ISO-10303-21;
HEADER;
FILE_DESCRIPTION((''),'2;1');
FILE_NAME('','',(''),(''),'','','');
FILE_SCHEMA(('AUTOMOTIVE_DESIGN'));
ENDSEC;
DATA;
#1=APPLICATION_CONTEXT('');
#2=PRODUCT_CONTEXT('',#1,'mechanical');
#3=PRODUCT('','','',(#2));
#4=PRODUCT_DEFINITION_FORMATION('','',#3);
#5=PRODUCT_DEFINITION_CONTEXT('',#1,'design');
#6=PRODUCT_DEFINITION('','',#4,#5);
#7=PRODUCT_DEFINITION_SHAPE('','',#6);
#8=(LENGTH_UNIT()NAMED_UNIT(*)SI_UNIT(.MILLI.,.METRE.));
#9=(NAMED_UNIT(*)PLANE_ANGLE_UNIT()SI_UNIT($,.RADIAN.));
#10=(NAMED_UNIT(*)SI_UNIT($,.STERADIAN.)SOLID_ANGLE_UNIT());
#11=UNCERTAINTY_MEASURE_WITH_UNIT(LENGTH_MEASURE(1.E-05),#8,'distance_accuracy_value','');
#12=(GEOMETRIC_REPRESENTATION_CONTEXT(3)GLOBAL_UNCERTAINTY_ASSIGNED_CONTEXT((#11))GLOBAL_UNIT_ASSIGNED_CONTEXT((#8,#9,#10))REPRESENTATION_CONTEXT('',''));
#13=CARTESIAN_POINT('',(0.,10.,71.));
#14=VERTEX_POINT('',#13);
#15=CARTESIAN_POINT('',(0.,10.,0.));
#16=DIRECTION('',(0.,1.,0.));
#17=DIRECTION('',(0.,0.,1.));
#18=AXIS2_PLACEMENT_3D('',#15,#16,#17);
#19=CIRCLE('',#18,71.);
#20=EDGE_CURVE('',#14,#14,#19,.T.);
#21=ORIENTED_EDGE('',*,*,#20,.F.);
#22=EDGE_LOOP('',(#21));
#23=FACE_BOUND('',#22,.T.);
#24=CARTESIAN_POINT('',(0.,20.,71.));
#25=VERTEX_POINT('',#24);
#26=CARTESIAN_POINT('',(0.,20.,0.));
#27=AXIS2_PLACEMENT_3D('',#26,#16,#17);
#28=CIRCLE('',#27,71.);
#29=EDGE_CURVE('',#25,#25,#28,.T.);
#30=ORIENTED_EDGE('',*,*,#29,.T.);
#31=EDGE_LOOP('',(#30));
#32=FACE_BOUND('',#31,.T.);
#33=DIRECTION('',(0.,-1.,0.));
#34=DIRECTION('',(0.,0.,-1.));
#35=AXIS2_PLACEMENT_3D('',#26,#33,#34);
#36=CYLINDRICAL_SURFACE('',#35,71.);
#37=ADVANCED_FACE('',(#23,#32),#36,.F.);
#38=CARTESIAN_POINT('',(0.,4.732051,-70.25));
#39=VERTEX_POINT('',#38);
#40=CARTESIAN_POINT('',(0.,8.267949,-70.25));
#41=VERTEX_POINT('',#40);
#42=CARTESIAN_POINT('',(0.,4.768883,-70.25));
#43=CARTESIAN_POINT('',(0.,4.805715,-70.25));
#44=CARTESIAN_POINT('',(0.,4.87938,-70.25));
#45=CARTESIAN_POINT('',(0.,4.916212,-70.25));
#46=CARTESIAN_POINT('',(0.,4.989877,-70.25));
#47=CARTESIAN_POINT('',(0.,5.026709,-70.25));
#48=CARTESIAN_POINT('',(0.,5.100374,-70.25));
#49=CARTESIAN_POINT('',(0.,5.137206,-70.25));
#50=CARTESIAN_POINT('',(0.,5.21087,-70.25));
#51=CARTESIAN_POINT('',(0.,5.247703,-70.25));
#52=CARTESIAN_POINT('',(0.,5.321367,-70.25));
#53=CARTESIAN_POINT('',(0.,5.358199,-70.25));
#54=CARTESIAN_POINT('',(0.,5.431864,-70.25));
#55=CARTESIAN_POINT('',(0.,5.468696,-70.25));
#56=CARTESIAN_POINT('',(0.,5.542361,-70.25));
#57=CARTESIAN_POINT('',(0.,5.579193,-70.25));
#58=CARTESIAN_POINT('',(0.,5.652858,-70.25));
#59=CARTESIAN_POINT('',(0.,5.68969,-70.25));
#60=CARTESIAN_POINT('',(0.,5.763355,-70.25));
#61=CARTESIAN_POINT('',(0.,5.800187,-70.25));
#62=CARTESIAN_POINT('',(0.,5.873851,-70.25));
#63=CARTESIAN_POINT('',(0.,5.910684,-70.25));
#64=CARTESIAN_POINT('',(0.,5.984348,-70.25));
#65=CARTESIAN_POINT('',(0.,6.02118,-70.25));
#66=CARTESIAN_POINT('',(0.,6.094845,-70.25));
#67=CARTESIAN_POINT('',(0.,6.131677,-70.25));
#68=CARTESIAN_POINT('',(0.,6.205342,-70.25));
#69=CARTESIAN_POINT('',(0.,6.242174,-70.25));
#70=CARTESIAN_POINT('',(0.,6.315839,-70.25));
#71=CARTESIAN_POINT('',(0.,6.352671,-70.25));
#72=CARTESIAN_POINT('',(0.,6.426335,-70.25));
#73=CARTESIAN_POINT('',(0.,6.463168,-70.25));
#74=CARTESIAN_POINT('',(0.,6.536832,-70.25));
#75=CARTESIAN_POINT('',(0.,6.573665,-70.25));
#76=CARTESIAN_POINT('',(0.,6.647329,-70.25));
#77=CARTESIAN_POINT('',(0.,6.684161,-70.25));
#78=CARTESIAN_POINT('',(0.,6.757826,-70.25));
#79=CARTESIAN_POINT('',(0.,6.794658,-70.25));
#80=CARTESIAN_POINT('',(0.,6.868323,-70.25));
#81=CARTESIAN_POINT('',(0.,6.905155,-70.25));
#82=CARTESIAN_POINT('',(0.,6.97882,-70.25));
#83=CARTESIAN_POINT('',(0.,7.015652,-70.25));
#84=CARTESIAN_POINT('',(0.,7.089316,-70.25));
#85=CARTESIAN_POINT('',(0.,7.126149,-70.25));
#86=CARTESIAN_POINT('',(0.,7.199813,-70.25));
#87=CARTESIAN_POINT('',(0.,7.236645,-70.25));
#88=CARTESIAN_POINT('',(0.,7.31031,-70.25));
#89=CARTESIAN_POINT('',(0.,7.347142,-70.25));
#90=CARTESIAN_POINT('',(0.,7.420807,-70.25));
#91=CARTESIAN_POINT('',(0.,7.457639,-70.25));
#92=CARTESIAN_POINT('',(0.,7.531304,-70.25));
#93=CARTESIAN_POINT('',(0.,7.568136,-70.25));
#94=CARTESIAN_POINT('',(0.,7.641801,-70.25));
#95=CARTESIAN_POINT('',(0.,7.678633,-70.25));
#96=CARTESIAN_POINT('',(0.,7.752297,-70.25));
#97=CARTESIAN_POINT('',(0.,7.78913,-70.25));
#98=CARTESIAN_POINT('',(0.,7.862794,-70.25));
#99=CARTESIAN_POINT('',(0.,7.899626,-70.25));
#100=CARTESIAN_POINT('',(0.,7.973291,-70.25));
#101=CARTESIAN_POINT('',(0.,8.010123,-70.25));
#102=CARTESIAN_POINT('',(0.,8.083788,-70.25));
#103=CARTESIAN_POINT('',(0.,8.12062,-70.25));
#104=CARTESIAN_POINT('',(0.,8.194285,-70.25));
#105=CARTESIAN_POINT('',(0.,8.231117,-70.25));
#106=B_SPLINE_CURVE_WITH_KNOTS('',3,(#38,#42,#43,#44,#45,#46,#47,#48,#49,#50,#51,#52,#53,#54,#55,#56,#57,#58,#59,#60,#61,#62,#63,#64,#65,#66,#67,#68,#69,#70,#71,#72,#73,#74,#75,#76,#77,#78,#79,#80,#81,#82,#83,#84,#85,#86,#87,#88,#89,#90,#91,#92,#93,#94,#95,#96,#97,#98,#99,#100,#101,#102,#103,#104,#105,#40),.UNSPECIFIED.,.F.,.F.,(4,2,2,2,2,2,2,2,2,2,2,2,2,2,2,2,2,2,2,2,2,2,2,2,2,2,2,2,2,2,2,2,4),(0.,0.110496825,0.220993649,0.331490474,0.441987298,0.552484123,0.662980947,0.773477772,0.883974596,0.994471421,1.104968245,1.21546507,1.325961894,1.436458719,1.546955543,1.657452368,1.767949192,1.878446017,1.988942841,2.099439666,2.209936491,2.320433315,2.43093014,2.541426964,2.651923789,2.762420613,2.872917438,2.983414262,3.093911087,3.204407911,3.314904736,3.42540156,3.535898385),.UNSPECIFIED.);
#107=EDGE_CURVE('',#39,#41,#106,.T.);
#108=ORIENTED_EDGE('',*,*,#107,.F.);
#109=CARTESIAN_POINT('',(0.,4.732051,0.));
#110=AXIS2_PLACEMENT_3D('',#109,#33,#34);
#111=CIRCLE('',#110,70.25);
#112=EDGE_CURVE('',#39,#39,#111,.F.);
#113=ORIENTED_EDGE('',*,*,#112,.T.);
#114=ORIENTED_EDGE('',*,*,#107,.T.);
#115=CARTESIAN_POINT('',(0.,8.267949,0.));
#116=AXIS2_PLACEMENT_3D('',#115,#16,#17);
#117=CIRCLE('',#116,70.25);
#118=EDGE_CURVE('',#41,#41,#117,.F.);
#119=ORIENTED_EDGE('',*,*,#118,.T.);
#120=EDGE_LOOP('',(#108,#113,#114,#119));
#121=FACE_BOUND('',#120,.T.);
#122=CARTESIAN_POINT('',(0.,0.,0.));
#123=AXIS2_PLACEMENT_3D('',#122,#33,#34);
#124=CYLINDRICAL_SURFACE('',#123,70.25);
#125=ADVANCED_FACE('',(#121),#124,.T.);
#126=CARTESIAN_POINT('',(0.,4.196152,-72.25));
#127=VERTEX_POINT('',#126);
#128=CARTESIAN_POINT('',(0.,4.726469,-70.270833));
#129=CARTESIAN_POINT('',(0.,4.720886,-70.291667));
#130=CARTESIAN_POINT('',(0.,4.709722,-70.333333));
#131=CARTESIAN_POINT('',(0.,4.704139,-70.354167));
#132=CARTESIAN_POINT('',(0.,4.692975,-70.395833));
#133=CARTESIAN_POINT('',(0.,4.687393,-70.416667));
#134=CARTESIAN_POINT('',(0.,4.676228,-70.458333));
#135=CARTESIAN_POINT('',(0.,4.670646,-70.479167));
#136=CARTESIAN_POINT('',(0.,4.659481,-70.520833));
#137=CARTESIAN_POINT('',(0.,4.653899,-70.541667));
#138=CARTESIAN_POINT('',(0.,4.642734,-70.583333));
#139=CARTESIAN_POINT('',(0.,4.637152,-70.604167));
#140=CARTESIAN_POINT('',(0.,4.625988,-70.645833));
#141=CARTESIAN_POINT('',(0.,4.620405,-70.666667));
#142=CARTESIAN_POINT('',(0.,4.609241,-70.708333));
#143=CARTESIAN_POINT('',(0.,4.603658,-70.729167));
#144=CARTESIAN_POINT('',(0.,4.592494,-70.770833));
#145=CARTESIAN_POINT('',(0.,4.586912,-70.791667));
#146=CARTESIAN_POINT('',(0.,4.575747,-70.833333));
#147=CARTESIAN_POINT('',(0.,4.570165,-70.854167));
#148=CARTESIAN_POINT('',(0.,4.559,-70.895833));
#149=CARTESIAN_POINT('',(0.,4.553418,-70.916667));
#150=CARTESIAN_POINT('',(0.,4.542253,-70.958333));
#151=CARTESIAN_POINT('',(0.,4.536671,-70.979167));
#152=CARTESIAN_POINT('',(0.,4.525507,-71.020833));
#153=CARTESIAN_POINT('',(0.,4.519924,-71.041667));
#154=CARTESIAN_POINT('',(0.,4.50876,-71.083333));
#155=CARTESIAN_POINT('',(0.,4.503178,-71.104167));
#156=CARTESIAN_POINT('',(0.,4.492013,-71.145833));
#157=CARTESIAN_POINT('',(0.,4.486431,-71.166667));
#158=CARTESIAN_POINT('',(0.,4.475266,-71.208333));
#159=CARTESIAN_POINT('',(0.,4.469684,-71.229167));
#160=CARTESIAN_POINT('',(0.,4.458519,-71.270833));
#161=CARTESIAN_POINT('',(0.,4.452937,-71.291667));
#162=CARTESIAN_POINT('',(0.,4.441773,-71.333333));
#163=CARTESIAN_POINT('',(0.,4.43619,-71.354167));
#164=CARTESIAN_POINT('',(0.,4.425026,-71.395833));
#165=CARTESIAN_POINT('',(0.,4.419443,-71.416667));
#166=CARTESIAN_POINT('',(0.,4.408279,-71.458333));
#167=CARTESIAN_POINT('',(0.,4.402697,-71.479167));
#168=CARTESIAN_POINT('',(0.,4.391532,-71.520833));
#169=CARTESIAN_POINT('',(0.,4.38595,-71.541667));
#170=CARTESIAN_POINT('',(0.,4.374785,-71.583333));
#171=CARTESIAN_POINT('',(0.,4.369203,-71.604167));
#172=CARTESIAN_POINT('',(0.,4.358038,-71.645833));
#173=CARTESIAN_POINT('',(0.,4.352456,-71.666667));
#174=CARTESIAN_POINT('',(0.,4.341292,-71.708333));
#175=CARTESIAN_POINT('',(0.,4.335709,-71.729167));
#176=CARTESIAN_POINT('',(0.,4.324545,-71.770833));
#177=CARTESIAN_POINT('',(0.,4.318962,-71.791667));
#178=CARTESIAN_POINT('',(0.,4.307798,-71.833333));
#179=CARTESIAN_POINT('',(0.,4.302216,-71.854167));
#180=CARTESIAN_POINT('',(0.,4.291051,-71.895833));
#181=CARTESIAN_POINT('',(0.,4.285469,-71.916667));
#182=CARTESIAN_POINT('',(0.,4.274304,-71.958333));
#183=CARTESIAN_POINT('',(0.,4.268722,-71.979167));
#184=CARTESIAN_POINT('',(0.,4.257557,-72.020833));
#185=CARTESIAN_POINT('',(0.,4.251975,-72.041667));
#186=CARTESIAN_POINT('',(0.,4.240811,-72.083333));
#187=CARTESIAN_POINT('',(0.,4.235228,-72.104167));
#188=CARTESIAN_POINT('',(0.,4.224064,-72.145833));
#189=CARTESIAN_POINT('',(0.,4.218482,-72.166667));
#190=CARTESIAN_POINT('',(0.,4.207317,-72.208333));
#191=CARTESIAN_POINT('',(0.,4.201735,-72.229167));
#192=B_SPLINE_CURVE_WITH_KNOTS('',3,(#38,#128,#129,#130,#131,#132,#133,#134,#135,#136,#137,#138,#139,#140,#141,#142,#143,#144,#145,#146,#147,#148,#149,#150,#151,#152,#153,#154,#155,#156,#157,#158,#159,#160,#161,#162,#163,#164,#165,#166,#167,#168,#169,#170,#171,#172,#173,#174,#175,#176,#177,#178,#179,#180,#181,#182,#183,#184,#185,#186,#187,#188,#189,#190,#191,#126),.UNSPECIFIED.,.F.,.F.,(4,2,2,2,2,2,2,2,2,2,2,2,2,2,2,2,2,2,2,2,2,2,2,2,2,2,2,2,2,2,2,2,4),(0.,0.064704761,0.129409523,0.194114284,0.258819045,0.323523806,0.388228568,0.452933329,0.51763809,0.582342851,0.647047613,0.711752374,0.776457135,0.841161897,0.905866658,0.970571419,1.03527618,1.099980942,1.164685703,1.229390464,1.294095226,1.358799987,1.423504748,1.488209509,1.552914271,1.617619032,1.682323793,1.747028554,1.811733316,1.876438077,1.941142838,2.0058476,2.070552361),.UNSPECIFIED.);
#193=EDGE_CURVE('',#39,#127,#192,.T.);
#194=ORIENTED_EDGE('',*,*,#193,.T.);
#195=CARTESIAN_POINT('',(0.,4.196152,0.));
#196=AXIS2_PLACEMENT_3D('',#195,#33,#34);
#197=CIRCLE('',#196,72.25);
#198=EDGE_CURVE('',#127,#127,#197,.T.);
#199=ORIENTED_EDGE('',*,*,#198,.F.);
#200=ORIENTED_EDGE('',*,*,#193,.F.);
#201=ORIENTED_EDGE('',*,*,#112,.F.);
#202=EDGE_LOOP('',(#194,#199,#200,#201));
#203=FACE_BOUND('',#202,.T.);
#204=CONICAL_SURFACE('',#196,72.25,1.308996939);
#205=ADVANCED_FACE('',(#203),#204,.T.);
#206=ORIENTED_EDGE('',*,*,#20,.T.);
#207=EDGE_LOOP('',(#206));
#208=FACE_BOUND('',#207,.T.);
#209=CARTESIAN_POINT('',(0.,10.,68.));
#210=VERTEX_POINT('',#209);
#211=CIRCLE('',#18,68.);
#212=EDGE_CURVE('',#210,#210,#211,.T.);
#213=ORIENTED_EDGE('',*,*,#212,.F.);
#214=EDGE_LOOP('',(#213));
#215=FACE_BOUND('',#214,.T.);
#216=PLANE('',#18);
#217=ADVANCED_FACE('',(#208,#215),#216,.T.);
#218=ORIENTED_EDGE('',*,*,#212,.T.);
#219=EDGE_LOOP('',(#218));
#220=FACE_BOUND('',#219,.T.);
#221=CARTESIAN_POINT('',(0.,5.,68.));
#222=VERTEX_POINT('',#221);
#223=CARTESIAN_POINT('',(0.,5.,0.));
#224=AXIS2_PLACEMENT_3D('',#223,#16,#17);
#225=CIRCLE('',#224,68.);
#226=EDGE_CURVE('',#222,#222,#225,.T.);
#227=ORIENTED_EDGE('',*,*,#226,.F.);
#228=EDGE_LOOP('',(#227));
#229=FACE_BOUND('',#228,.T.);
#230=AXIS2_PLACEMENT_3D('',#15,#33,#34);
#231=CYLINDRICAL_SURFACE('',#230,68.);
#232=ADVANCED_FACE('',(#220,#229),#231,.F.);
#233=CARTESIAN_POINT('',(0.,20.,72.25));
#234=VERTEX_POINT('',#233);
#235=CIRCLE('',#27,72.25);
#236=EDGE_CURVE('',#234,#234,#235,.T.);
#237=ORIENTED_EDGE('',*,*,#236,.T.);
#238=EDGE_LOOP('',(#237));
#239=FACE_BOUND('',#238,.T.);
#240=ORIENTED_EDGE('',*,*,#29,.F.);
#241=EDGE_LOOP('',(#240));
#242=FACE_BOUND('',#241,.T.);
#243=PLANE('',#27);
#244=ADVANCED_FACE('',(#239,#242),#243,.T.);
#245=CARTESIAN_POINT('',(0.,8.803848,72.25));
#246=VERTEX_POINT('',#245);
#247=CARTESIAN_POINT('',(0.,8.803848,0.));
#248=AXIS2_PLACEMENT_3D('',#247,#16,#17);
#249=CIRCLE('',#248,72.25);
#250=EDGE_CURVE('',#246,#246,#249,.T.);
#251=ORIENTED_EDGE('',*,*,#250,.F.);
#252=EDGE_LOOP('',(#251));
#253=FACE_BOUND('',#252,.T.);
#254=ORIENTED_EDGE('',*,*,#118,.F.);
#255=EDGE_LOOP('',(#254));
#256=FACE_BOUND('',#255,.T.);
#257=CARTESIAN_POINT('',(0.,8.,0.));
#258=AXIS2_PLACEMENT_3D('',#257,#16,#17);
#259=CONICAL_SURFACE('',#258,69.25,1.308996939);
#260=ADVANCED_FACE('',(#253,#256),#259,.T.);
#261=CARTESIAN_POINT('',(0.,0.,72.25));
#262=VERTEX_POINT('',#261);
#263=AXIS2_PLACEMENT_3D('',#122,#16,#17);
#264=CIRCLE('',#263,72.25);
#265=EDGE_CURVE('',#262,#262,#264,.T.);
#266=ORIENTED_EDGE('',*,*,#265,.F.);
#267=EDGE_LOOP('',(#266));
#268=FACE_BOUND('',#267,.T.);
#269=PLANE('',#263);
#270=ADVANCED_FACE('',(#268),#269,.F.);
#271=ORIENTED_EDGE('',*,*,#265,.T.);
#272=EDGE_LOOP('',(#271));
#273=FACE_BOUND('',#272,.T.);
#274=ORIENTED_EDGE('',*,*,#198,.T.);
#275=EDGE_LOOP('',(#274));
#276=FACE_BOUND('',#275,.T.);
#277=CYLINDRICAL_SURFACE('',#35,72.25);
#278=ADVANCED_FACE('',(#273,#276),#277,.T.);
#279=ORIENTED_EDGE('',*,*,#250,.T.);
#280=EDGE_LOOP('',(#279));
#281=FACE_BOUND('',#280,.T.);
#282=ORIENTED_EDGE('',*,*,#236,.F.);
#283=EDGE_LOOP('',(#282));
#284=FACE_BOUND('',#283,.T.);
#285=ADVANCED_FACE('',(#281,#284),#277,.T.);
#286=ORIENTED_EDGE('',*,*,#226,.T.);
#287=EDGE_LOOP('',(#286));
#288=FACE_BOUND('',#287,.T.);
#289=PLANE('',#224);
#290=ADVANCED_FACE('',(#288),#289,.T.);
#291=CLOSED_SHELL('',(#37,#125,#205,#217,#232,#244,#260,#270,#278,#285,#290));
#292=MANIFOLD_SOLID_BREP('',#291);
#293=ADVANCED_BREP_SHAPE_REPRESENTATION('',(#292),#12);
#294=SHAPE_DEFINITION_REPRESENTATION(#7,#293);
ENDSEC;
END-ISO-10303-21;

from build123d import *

# Parameters (mm, degrees)
SKETCH_1_R       = 72.25
SKETCH_1_R_2     = 71
EXTRUDE_1_DEPTH  = 20
SKETCH_1_6_R     = 71
SKETCH_1_6_R_2   = 68
EXTRUDE_3_DEPTH  = 10
SKETCH_2_W       = 2
SKETCH_2_H       = 3
CHAMFER_1_SIZE   = 3
CHAMFER_1_SIZE_2 = 0.803847577
CHAMFER_2_SIZE   = 0.803847577
CHAMFER_2_SIZE_2 = 3
SKETCH_1_8_R     = 68
SKETCH_1_8_R_2   = 62.25
EXTRUDE_5_DEPTH  = 5


with BuildPart() as part:
    # 草圖1 → 填料-伸長1 (new body)
    with BuildSketch(Plane(origin=(0, 0, 0), x_dir=(1, 0, 0), z_dir=(0, 1, 0))):
        with Locations(Location((0, 0, 0), (0, 0, 270))):
            Circle(SKETCH_1_R)
        with Locations(Location((0, 0, 0), (0, 0, 270))):
            Circle(SKETCH_1_R_2, mode=Mode.SUBTRACT)
    extrude(amount=EXTRUDE_1_DEPTH)

    # 草圖1<6> → 填料-伸長3 (add)
    with BuildSketch(Plane(origin=(0, 0, 0), x_dir=(1, 0, 0), z_dir=(0, 1, 0))):
        with Locations(Location((0, 0, 0), (0, 0, 270))):
            Circle(SKETCH_1_6_R)
        with Locations(Location((0, 0, 0), (0, 0, 270))):
            Circle(SKETCH_1_6_R_2, mode=Mode.SUBTRACT)
    extrude(amount=EXTRUDE_3_DEPTH)

    # 草圖2 → 除料-旋轉1 (revolve, cut)
    with BuildSketch(Plane.XY, mode=Mode.PRIVATE) as cut_revolve_1_sk:
        with Locations((71.25, 6.5)):
            Rectangle(SKETCH_2_W, SKETCH_2_H)
    revolve(cut_revolve_1_sk.sketch.rotate(Axis((0, 0, 0), (0, 1, 0)), 90), axis=Axis((0, 0, 0), (0, 1, 0)), mode=Mode.SUBTRACT)

    # 導角1
    # the kernel refuses this chamfer: 3, 0.803847577 mm, written as the material it takes off along each edge
    with BuildSketch(Plane(origin=(0, 8, 0), x_dir=(0, 0, 1), z_dir=(1, 0, 0))) as chamfer_1_piece_1_section:
        Polygon((72.25 - CHAMFER_1_SIZE, 0), (72.25, -CHAMFER_1_SIZE_2), (72.25, 0), align=None)
    chamfer_1_piece_1 = revolve(axis=Axis((0, 8, 0), (0, -1, 0)), mode=Mode.PRIVATE)
    chamfer_1_piece_1 = chamfer_1_piece_1 - Plane(origin=(0, 8.471650201, 0), x_dir=(0, 0, -1), z_dir=(0, 1, 0)) * Cylinder(70.25, 289, mode=Mode.PRIVATE)
    add(chamfer_1_piece_1, mode=Mode.SUBTRACT)

    # 導角2
    # the kernel refuses this chamfer: 3, 0.803847577 mm, written as the material it takes off along each edge
    with BuildSketch(Plane(origin=(0, 5, 0), x_dir=(0, 0, 1), z_dir=(1, 0, 0))) as chamfer_2_piece_1_section:
        Polygon((72.25, CHAMFER_2_SIZE), (72.25 - CHAMFER_2_SIZE_2, 0), (72.25, 0), align=None)
    chamfer_2_piece_1 = revolve(axis=Axis((0, 5, 0), (0, -1, 0)), mode=Mode.PRIVATE)
    chamfer_2_piece_1 = chamfer_2_piece_1 - Plane(origin=(0, 4.528349799, 0), x_dir=(0, 0, -1), z_dir=(0, 1, 0)) * Cylinder(70.25, 289, mode=Mode.PRIVATE)
    add(chamfer_2_piece_1, mode=Mode.SUBTRACT)

    # 草圖1<8> → 填料-伸長5 (add)
    # profile 1 of 2: a face of its own
    with BuildSketch(Plane(origin=(0, 0, 0), x_dir=(1, 0, 0), z_dir=(0, 1, 0))):
        with Locations(Location((0, 0, 0), (0, 0, 270))):
            Circle(SKETCH_1_8_R)
        Circle(SKETCH_1_8_R_2, mode=Mode.SUBTRACT)
    # profile 2 of 2: a face of its own
    with BuildSketch(Plane(origin=(0, 0, 0), x_dir=(1, 0, 0), z_dir=(0, 1, 0))):
        Circle(SKETCH_1_8_R_2)
    extrude(amount=EXTRUDE_5_DEPTH)


solid = part.part
